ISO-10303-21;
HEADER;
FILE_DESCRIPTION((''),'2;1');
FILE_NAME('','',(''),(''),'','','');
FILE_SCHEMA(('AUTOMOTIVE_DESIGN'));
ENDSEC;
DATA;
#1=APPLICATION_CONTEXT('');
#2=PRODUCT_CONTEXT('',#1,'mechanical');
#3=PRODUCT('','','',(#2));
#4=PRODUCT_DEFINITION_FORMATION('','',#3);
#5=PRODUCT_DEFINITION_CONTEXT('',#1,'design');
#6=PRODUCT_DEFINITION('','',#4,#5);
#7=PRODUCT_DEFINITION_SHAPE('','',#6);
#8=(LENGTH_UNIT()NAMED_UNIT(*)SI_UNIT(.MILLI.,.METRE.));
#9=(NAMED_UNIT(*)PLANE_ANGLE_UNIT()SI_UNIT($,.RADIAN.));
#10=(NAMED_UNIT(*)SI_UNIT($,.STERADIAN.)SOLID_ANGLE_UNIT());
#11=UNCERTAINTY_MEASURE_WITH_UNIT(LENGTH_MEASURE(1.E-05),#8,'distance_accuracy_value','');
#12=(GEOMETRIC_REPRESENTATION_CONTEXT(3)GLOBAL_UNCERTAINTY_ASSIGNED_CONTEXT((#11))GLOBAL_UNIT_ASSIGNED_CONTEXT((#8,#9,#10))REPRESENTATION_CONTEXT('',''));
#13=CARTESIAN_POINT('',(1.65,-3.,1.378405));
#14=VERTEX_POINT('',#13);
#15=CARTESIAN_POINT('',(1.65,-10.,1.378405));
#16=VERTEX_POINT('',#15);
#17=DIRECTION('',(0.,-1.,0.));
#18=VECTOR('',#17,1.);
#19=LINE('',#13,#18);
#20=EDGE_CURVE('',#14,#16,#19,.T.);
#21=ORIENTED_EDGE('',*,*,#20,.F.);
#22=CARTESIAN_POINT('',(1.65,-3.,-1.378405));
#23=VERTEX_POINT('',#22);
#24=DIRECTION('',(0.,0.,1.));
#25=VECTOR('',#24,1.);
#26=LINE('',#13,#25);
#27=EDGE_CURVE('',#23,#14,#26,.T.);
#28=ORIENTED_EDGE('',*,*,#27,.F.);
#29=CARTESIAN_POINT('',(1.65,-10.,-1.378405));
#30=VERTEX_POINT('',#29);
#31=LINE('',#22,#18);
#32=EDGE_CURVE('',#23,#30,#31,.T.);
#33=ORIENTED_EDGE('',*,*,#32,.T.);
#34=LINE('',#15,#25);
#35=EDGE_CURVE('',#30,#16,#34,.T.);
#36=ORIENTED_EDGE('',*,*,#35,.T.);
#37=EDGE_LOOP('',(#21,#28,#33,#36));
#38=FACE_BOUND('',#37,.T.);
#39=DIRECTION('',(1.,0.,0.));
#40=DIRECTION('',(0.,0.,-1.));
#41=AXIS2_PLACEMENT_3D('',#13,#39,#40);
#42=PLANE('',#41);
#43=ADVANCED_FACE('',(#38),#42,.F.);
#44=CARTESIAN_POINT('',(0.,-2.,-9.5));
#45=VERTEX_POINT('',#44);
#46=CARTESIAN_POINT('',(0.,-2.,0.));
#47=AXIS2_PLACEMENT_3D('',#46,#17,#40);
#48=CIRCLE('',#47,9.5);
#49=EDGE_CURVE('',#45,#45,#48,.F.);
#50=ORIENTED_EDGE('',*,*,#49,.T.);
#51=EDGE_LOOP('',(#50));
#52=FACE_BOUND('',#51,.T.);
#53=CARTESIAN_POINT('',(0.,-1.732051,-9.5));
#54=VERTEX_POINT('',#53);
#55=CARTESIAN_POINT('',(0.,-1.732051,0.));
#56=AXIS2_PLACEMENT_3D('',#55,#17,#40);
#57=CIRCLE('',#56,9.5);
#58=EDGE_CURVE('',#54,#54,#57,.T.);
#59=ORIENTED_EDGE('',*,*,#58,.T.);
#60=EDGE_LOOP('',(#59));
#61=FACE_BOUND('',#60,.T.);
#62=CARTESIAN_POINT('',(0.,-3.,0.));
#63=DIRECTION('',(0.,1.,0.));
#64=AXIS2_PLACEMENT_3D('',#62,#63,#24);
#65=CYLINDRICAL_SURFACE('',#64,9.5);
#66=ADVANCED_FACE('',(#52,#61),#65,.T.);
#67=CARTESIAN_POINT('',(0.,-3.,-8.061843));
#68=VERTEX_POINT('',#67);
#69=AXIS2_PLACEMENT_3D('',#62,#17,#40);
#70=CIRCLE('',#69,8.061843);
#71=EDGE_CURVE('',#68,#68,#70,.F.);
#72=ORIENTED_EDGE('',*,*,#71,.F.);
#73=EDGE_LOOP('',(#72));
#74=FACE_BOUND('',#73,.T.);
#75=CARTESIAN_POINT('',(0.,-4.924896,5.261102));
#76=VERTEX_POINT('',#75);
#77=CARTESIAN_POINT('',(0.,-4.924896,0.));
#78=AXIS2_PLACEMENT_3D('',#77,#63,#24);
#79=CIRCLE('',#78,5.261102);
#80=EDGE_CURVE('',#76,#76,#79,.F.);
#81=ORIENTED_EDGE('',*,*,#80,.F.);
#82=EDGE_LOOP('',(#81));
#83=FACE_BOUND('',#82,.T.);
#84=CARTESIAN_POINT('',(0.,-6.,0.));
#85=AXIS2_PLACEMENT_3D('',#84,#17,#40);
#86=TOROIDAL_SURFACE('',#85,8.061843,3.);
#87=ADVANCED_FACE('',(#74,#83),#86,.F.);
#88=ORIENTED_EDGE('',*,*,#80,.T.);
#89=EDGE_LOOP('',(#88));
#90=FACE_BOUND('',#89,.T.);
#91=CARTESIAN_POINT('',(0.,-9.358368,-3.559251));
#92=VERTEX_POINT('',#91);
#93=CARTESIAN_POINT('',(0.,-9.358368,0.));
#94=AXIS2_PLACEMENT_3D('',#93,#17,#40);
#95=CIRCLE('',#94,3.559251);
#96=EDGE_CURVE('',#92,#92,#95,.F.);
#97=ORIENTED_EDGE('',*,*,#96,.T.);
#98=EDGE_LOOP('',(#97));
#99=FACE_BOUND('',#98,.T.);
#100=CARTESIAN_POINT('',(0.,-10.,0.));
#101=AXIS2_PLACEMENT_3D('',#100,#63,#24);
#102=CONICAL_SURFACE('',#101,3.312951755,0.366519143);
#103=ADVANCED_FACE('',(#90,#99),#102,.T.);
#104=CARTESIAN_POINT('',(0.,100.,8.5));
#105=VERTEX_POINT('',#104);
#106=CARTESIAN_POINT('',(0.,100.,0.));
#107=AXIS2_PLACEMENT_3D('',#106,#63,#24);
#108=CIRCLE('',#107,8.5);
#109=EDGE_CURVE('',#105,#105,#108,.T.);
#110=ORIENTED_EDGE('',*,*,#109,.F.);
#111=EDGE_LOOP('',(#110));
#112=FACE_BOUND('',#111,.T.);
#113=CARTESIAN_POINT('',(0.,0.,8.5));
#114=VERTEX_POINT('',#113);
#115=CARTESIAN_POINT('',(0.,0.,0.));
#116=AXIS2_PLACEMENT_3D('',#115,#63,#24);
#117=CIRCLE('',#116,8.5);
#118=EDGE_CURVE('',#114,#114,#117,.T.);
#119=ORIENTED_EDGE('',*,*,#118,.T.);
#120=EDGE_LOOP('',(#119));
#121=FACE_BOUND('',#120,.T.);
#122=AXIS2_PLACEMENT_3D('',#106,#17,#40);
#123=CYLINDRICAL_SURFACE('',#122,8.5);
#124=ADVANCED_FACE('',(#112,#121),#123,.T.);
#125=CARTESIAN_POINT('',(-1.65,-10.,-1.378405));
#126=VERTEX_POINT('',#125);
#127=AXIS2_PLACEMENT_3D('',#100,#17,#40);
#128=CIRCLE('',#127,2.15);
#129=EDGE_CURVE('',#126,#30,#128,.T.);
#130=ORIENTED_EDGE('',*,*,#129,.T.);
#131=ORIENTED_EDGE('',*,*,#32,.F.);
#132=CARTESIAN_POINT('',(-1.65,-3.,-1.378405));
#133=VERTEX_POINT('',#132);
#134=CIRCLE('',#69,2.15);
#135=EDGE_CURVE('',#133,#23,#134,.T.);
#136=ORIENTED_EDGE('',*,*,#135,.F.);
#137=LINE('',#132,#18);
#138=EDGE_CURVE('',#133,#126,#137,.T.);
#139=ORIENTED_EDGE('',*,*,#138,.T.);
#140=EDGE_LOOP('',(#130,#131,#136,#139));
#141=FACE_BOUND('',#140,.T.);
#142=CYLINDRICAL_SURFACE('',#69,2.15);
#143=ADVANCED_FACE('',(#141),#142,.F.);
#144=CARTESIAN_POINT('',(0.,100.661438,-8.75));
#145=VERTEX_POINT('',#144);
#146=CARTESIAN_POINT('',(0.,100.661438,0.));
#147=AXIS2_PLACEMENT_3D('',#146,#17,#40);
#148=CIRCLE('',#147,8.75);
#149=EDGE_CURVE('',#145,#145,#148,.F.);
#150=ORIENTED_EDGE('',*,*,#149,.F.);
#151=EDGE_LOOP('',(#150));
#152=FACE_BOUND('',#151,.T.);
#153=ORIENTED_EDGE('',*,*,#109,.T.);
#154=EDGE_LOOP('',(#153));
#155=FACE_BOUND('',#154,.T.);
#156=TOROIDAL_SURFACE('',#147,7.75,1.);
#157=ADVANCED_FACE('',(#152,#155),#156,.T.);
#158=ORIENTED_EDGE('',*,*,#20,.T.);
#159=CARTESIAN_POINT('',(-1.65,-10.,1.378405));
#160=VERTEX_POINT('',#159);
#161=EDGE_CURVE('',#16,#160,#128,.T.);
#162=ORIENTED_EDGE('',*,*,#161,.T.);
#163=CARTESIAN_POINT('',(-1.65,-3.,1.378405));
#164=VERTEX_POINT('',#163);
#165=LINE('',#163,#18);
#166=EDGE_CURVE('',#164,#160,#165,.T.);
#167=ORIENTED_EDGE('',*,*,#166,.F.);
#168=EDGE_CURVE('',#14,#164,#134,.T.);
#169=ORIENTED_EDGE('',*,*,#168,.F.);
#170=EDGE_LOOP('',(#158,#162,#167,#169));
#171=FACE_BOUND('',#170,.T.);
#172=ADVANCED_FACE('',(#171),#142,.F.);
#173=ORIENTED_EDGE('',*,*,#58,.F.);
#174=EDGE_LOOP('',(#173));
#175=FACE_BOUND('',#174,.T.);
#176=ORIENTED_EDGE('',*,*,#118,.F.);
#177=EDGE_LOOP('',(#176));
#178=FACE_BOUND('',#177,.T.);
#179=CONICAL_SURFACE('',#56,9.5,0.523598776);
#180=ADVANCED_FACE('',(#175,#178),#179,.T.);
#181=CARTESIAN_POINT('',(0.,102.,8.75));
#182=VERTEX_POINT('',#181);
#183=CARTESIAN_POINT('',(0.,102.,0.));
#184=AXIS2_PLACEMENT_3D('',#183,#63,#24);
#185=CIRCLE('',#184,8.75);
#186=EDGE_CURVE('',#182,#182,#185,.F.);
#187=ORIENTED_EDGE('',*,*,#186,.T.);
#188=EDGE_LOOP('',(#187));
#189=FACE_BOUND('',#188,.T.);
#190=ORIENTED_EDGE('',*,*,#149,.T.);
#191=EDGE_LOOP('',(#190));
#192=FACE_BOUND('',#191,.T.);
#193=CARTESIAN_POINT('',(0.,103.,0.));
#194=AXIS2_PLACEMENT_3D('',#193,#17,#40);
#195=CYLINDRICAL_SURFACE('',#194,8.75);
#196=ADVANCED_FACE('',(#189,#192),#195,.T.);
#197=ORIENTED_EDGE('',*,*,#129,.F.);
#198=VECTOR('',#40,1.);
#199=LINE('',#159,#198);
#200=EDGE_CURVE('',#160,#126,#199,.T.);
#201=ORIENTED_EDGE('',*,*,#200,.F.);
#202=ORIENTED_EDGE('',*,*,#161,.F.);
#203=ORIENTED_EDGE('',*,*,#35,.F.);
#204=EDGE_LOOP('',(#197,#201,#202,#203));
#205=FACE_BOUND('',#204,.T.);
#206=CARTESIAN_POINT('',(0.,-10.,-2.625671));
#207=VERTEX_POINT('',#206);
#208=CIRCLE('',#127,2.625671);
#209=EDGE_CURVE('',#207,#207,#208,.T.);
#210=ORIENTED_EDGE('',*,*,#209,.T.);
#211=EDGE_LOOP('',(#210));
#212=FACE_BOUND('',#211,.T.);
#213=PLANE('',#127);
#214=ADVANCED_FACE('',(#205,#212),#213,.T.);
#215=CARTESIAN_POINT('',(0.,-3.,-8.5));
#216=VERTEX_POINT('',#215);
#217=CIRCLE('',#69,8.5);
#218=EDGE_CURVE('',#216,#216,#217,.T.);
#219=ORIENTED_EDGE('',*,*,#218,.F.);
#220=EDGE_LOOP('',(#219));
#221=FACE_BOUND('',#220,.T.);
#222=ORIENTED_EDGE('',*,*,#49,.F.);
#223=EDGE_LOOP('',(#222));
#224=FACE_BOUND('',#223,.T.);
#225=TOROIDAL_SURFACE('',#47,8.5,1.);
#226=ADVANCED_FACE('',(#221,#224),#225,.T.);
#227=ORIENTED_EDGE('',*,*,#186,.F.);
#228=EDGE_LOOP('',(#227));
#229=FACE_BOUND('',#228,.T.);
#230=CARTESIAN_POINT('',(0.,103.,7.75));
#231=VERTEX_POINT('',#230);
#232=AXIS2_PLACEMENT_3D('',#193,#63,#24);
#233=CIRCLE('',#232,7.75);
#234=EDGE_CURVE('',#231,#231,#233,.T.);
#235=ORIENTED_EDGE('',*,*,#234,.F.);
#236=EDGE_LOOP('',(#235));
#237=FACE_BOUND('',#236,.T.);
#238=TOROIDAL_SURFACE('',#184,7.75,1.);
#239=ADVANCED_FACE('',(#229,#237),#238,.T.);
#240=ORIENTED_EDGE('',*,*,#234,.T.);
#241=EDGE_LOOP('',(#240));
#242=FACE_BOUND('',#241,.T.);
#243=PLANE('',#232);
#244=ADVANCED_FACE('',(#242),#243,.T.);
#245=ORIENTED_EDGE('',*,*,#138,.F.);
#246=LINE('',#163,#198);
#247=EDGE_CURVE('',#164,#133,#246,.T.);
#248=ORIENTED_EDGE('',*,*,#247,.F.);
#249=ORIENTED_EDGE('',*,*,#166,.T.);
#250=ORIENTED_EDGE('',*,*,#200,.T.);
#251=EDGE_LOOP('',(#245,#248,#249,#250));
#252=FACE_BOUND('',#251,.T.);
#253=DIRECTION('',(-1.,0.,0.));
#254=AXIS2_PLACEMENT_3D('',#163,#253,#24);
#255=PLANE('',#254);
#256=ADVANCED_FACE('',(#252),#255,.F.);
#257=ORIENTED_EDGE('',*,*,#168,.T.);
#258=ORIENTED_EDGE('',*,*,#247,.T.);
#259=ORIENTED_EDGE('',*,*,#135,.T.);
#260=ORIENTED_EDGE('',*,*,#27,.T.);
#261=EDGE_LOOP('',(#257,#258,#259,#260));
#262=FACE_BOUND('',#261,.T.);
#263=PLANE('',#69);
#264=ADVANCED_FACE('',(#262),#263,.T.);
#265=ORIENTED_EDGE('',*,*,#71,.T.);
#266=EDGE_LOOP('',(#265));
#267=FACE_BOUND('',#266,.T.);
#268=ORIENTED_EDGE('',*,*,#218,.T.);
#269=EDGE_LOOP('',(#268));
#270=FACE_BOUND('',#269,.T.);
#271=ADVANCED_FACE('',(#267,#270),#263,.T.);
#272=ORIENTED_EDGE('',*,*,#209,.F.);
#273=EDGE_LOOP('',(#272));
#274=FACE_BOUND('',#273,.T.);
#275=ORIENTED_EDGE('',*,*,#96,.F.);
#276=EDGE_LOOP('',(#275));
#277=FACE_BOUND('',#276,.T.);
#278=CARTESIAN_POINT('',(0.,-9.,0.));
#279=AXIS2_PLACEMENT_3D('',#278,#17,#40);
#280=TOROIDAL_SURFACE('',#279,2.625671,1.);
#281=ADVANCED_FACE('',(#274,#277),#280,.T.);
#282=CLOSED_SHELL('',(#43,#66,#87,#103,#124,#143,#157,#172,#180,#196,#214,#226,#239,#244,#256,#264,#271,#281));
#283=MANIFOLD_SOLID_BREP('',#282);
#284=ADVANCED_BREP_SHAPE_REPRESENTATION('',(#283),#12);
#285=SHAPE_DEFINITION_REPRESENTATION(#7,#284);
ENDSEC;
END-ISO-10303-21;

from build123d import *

# Parameters (mm, degrees)
SKETCH1_R           = 8.5
BOSS_EXTRUDE1_DEPTH = 100
SKETCH2_R           = 8.75
BOSS_EXTRUDE2_DEPTH = 3
FILLET5_R           = 1
FILLET8_R           = 1
SKETCH5_R           = 9.5
BOSS_EXTRUDE3_DEPTH = 3
FILLET10_R          = 1
CHAMFER2_SIZE2      = 1
CHAMFER2_SIZE       = 1.732050808
SKETCH6_R           = 6
BOSS_EXTRUDE4_DEPTH = 7
CUT_EXTRUDE1_DEPTH  = 7
CHAMFER4_SIZE2      = 2.687048245
CHAMFER4_SIZE       = 7
FILLET12_R          = 1


with BuildPart() as part:
    # Sketch1 → Boss-Extrude1 (new body)
    with BuildSketch(Plane(origin=(0, 0, 0), x_dir=(1, 0, 0), z_dir=(0, 1, 0))):
        with Locations(Location((0, 0, 0), (0, 0, 270))):
            Circle(SKETCH1_R)
    extrude(amount=BOSS_EXTRUDE1_DEPTH)

    # Sketch2 → Boss-Extrude2 (add)
    with BuildSketch(Plane(origin=(0, 100, 0), x_dir=(1, 0, 0), z_dir=(0, 1, 0))):
        with Locations(Location((0, 0, 0), (0, 0, 270))):
            Circle(SKETCH2_R)
    extrude(amount=BOSS_EXTRUDE2_DEPTH)

    # Fillet5
    fillet5_edges = [part.edges().sort_by_distance(p)[0] for p in [
        (0, 103, -8.75),
    ]]
    fillet(fillet5_edges, radius=FILLET5_R)

    # Fillet8
    # the kernel refuses this fillet: 1 mm, written as the material it takes off along each edge
    with BuildSketch(Plane(origin=(0, 100, 0), x_dir=(0, 0, 1), z_dir=(-1, 0, 0))) as fillet8_piece_1:
        with BuildLine():
            CenterArc((7.75, 0.661437828), FILLET8_R, 318.590377891, 41.409622109)
            Line((8.5, 0), (8.515, -0.013228757))
            ThreePointArc((8.515, -0.013228757), (8.625, -0.02), (8.75, -0.02))
            Line((8.75, -0.02), (8.77, 0))
            Line((8.77, 0), (8.77, 0.661437828))
            Line((8.77, 0.661437828), (8.75, 0.661437828))
        make_face()
    revolve(axis=Axis((0, 100, 0), (0, 1, 0)), mode=Mode.SUBTRACT)

    # Sketch5 → Boss-Extrude3 (add)
    with BuildSketch(Plane.XZ):
        with Locations(Location((0, 0, 0), (0, 0, 270))):
            Circle(SKETCH5_R)
    extrude(amount=BOSS_EXTRUDE3_DEPTH)

    # Fillet10
    fillet10_edges = [part.edges().sort_by_distance(p)[0] for p in [
        (0, -3, 9.5),
    ]]
    fillet(fillet10_edges, radius=FILLET10_R)

    # Chamfer2
    chamfer2_edges = [part.edges().sort_by_distance(p)[0] for p in [
        (0, 0, 9.5),
    ]]
    chamfer2_side = [part.faces().sort_by_distance(p)[0] for p in [
        (0, -0.02, 9.5),
    ]]
    chamfer(chamfer2_edges, length=CHAMFER2_SIZE - 0.0001, length2=CHAMFER2_SIZE2 - 0.0001, reference=chamfer2_side[0])  # a hair under: the kernel refuses the full size

    # Sketch6 → Boss-Extrude4 (add)
    with BuildSketch(Plane.XZ.offset(3)):
        with Locations(Location((0, 0, 0), (0, 0, 270))):
            Circle(SKETCH6_R)
    extrude(amount=BOSS_EXTRUDE4_DEPTH)

    # Sketch7 → Cut-Extrude1 (cut)
    with BuildSketch(Plane.XZ.offset(10)):
        with BuildLine():
            Line((-1.65, 1.378404875), (-1.65, -1.378404875))
            ThreePointArc((-1.65, -1.378404875), (0, -2.15), (1.65, -1.378404875))
            Line((1.65, -1.378404875), (1.65, 1.378404875))
            ThreePointArc((1.65, 1.378404875), (0, 2.15), (-1.65, 1.378404875))
        make_face()
    extrude(amount=-CUT_EXTRUDE1_DEPTH, mode=Mode.SUBTRACT)

    # Chamfer4
    chamfer4_edges = [part.edges().sort_by_distance(p)[0] for p in [
        (0, -10, 6),
    ]]
    chamfer4_side = [part.faces().sort_by_distance(p)[0] for p in [
        (0, -9.946259035, 6),
    ]]
    chamfer(chamfer4_edges, length=CHAMFER4_SIZE - 0.0001, length2=CHAMFER4_SIZE2 - 0.0001, reference=chamfer4_side[0])  # a hair under: the kernel refuses the full size

    # Fillet11: read off the stored shape, not the designer's step
    # Fillet11 outline → Fillet11 (revolve)
    with BuildSketch(Plane.XY):
        with BuildLine():
            Line((5.261101596, -3), (5.261101596, -4.924896151))
            ThreePointArc((5.261101596, -4.924896151), (6.362624165, -3.527621434), (8.061842876, -3))
            Line((8.061842876, -3), (5.261101596, -3))
        make_face()
    revolve(axis=Axis((0, 0, 0), (0, 1, 0)))

    # Fillet12
    fillet12_edges = [part.edges().sort_by_distance(p)[0] for p in [
        (0, -10, 3.313051755),
    ]]
    fillet(fillet12_edges, radius=FILLET12_R)


solid = part.part
